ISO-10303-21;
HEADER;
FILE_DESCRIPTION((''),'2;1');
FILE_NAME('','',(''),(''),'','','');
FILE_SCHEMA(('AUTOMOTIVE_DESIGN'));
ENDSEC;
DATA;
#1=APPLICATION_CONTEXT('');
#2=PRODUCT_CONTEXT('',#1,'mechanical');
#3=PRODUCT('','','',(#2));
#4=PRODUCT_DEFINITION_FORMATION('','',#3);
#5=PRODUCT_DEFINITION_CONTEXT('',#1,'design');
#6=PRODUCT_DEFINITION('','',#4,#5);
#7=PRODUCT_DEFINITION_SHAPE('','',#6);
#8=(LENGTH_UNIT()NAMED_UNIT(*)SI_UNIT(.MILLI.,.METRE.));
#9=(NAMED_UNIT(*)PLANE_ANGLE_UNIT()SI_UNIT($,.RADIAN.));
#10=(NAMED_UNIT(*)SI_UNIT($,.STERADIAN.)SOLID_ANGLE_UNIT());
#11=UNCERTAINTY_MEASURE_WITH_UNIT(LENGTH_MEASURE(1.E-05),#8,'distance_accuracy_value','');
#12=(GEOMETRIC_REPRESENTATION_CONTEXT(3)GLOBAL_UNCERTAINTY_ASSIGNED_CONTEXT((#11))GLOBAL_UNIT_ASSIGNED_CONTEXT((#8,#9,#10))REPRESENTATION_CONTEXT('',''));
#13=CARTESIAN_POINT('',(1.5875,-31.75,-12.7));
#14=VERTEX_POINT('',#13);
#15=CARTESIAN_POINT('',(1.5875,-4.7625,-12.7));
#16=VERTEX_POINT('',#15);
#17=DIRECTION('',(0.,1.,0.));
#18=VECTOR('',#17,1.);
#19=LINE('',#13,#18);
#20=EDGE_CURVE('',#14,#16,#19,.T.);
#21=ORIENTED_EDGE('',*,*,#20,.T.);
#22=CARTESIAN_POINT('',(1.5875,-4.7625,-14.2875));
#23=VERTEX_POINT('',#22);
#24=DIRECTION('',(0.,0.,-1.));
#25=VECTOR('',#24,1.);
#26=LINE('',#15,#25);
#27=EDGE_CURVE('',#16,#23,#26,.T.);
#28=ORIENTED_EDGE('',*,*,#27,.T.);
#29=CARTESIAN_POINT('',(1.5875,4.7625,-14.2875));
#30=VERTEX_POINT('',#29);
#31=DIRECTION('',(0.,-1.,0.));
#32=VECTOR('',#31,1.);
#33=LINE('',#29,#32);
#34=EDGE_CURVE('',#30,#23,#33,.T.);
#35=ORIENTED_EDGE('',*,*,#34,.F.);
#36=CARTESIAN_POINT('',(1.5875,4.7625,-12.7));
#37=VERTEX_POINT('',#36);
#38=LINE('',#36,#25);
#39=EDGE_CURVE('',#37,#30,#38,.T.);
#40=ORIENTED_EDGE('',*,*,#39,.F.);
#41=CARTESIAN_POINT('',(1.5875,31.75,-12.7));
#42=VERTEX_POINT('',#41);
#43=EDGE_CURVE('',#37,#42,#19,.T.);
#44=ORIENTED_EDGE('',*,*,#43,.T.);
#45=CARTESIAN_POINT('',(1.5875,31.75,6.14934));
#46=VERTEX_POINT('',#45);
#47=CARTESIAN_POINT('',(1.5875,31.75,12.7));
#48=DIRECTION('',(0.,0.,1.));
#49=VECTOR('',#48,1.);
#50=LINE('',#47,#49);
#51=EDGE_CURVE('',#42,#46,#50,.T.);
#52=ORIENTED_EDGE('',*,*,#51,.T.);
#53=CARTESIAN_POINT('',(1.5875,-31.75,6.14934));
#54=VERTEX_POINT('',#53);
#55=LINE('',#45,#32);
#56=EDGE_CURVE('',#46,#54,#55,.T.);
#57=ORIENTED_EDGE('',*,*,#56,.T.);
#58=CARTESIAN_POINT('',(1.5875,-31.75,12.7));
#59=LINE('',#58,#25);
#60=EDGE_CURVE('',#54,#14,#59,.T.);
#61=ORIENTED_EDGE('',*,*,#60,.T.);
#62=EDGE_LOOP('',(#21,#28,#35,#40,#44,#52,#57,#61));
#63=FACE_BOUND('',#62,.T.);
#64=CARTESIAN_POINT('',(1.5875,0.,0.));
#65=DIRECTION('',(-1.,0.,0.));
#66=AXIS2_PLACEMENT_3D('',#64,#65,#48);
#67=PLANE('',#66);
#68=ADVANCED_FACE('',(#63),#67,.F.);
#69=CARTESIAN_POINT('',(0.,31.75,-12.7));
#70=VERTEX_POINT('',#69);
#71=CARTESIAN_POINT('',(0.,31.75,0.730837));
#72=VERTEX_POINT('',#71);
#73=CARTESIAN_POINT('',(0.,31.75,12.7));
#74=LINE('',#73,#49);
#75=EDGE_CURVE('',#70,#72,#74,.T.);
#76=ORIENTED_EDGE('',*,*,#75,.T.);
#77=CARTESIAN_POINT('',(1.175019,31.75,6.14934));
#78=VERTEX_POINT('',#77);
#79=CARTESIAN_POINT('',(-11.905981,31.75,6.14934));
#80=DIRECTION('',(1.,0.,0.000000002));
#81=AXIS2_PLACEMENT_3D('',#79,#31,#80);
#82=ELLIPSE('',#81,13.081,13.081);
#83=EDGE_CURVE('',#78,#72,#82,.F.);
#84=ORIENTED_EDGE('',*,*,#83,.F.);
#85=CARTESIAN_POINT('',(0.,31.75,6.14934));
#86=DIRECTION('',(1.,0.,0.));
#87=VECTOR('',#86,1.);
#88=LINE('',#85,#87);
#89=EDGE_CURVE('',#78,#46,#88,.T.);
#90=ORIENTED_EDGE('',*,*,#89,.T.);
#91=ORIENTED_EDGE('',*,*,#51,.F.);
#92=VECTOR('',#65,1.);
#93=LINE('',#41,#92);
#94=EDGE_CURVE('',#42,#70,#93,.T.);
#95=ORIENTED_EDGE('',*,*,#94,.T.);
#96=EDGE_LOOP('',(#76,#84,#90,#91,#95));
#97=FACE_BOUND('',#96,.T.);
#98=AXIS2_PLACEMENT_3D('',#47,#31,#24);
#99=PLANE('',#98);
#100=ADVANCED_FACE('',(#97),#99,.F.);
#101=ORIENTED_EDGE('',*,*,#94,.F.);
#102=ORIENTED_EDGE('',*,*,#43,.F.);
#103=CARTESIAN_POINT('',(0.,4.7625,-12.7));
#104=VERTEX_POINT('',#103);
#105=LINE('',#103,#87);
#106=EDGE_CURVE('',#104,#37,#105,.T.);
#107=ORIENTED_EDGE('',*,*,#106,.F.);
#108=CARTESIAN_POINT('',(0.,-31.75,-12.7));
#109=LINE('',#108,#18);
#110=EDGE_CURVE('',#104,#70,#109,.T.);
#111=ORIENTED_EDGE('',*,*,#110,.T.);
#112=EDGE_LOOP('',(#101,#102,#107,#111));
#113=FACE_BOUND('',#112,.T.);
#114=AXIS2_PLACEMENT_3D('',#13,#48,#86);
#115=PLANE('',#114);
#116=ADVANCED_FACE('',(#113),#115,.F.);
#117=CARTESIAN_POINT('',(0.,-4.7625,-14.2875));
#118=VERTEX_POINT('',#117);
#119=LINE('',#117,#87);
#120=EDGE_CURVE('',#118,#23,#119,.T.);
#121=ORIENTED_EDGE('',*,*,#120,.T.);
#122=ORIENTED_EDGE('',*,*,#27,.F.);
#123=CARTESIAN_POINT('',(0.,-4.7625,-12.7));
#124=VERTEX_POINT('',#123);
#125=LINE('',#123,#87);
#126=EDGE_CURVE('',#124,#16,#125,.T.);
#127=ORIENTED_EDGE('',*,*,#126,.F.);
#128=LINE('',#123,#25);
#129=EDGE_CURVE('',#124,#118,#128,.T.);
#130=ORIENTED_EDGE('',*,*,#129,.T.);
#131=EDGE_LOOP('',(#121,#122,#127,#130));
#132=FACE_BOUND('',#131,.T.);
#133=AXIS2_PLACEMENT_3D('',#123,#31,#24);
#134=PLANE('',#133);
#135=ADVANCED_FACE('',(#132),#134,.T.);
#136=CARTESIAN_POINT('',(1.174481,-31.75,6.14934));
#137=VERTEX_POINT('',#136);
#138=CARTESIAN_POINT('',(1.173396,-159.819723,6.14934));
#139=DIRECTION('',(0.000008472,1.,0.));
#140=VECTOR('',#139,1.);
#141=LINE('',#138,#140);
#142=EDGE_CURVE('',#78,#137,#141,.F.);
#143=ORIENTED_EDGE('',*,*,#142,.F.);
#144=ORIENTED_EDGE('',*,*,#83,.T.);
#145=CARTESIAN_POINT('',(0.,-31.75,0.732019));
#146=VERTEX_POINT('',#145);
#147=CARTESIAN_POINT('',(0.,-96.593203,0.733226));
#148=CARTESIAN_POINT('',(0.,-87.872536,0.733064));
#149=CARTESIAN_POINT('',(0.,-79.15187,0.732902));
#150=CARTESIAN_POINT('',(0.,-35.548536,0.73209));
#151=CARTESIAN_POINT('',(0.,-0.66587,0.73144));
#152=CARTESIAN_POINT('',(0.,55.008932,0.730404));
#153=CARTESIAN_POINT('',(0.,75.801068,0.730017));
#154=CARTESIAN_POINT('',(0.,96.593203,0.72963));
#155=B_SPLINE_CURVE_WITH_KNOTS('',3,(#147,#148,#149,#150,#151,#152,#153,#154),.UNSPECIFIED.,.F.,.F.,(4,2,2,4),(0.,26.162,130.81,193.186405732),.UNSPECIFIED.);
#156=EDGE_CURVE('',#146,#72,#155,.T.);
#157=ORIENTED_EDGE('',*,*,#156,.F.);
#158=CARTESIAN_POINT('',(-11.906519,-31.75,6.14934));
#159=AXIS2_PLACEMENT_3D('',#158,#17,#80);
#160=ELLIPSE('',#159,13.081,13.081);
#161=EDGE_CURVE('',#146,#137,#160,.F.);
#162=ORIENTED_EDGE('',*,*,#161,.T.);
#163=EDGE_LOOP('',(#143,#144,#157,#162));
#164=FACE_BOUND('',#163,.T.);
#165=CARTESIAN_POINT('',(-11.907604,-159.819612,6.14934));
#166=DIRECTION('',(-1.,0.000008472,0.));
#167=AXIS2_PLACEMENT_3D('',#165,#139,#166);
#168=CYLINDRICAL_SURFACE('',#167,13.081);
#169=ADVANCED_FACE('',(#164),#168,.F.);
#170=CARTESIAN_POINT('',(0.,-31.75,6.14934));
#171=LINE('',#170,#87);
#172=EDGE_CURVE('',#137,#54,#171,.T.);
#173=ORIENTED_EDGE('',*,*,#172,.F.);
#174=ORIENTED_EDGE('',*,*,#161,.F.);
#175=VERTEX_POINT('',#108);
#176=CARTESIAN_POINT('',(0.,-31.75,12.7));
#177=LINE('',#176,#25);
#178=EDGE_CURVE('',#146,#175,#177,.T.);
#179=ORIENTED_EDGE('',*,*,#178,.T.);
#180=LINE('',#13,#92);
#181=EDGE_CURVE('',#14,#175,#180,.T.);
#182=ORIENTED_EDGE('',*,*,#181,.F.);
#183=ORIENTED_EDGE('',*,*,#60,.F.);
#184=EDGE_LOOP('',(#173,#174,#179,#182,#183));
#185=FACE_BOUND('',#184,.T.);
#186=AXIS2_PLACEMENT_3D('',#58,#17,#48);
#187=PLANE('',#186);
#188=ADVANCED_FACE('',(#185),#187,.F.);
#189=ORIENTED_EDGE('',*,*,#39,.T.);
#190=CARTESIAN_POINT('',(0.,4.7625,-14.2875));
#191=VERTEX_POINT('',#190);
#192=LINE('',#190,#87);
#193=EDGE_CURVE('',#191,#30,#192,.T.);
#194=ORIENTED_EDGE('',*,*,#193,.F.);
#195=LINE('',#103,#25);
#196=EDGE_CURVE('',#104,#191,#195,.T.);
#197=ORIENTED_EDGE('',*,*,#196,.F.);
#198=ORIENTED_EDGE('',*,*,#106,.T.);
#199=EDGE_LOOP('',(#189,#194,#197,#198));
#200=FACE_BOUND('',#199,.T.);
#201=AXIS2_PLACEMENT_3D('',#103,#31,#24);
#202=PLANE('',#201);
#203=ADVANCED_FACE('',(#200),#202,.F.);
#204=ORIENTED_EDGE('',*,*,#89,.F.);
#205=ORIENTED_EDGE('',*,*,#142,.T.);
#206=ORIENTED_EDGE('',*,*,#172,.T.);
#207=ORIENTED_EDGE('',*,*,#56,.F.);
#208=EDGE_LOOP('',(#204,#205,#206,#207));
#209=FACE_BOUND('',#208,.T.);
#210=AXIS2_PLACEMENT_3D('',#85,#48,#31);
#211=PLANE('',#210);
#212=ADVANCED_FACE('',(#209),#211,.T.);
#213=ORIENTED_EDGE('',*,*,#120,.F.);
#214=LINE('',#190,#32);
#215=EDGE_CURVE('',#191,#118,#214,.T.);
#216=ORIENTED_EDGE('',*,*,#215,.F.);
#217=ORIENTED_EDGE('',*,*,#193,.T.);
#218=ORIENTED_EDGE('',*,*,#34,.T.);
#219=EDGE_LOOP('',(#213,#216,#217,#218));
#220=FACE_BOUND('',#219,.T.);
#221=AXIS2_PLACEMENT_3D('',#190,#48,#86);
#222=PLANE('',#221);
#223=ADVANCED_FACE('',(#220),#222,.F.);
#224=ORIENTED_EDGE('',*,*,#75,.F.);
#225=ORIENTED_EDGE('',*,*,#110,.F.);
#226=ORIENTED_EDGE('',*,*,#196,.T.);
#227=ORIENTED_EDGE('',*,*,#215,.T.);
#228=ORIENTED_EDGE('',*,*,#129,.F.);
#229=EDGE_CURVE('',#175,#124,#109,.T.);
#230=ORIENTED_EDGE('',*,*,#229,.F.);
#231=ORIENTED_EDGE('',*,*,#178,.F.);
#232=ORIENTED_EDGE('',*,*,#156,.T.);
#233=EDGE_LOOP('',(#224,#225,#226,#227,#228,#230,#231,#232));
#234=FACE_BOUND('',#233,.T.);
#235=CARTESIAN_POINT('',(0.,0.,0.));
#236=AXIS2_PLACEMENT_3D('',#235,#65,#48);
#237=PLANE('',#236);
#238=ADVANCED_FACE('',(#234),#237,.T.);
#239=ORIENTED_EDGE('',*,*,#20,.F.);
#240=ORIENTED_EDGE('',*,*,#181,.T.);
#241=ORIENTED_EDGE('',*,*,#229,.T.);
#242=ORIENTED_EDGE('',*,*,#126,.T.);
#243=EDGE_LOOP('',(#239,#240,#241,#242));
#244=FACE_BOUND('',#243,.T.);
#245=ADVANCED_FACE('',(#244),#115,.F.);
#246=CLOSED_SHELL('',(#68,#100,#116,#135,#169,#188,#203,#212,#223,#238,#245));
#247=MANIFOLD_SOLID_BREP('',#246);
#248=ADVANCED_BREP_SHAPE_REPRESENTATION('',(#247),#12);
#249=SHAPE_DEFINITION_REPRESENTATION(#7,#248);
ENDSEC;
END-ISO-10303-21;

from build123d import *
from OCP.BRepAlgoAPI import BRepAlgoAPI_Cut
from OCP.TopTools import TopTools_ListOfShape

# Parameters (mm, degrees)
SKETCH2_W           = 25.4
SKETCH2_H           = 63.5
BOSS_EXTRUDE1_DEPTH = 1.5875
SKETCH3_W           = 1.5875
SKETCH3_H           = 9.525
BOSS_EXTRUDE2_DEPTH = 1.5875
SKETCH3_4_W         = 1.5875
SKETCH3_4_H         = 9.525
CUT_EXTRUDE1_DEPTH  = 3.175
CUT_EXTRUDE2_DEPTH  = 35.85276621
CAVITY1_START       = -31.74999873
CAVITY1_DEPTH       = 63.499999998


with BuildPart() as part:
    # Sketch2 → Boss-Extrude1 (new body)
    with BuildSketch(Plane(origin=(0, 0, 0), x_dir=(0, 0, -1), z_dir=(1, 0, 0))):
        Rectangle(SKETCH2_W, SKETCH2_H)
    extrude(amount=BOSS_EXTRUDE1_DEPTH)

    # Sketch3 → Boss-Extrude2 (add)
    with BuildSketch(Plane(origin=(1.5875, 0, 0), x_dir=(0, 0, -1), z_dir=(1, 0, 0))):
        with Locations((13.49375, 0)):
            Rectangle(SKETCH3_W, SKETCH3_H)
    extrude(amount=-BOSS_EXTRUDE2_DEPTH)

    # Sketch3<4> → Cut-Extrude1 (cut)
    with BuildSketch(Plane(origin=(1.5875, 0, 0), x_dir=(0, 0, -1), z_dir=(1, 0, 0))):
        with Locations((-11.90625, 0)):
            Rectangle(SKETCH3_4_W, SKETCH3_4_H)
    extrude(amount=-CUT_EXTRUDE1_DEPTH, mode=Mode.SUBTRACT)

    # Sketch4 → Cut-Extrude2 (cut, through all)
    with BuildSketch(Plane(origin=(1.5875, 0, 0), x_dir=(0, 0, -1), z_dir=(1, 0, 0))):
        Polygon((-6.14934, 31.75), (-6.14934, -31.75), (-12.7, -31.75), (-12.7, -4.7625), (-11.1125, -4.7625), (-11.1125, 4.7625), (-12.7, 4.7625), (-12.7, 31.75), align=None)
    extrude(amount=-CUT_EXTRUDE2_DEPTH, mode=Mode.SUBTRACT)


with BuildPart() as cavity1_tool:
    # Cavity1: read off the stored shape, not the designer's step
    # Cavity1 outline → Cavity1 (new body)
    with BuildSketch(Plane(origin=(0, 0, 0), x_dir=(0.9999999999641164, -8.471563968881495e-06, 0), z_dir=(8.471563968881494e-06, 0.9999999999641164, 0)).offset(CAVITY1_START)):
        with BuildLine():
            Line((-2, -6.14934), (1.17475, -6.14934))
            ThreePointArc((1.17475, -6.14934), (0.877620674, -3.377118582), (-0.000268972, -0.730836814))
            Line((-0.000268972, -0.730836814), (-0.787986067, 1))
            Line((-0.787986067, 1), (-2, 1))
            Line((-2, 1), (-2, -6.14934))
        make_face()
    extrude(amount=CAVITY1_DEPTH)


with BuildPart() as part_1:
    add(part.part)

    # Cavity1: cut by cavity1_tool, with a tolerance
    cavity1_stock = TopTools_ListOfShape()
    cavity1_stock.Append(part_1.part.wrapped)
    cavity1_tools = TopTools_ListOfShape()
    cavity1_tools.Append(cavity1_tool.part.wrapped)
    cavity1_cut = BRepAlgoAPI_Cut()
    cavity1_cut.SetArguments(cavity1_stock)
    cavity1_cut.SetTools(cavity1_tools)
    cavity1_cut.SetFuzzyValue(0.00001)
    cavity1_cut.Build()
    add(Compound.cast(cavity1_cut.Shape()).solids(), mode=Mode.REPLACE)


solid = part_1.part
